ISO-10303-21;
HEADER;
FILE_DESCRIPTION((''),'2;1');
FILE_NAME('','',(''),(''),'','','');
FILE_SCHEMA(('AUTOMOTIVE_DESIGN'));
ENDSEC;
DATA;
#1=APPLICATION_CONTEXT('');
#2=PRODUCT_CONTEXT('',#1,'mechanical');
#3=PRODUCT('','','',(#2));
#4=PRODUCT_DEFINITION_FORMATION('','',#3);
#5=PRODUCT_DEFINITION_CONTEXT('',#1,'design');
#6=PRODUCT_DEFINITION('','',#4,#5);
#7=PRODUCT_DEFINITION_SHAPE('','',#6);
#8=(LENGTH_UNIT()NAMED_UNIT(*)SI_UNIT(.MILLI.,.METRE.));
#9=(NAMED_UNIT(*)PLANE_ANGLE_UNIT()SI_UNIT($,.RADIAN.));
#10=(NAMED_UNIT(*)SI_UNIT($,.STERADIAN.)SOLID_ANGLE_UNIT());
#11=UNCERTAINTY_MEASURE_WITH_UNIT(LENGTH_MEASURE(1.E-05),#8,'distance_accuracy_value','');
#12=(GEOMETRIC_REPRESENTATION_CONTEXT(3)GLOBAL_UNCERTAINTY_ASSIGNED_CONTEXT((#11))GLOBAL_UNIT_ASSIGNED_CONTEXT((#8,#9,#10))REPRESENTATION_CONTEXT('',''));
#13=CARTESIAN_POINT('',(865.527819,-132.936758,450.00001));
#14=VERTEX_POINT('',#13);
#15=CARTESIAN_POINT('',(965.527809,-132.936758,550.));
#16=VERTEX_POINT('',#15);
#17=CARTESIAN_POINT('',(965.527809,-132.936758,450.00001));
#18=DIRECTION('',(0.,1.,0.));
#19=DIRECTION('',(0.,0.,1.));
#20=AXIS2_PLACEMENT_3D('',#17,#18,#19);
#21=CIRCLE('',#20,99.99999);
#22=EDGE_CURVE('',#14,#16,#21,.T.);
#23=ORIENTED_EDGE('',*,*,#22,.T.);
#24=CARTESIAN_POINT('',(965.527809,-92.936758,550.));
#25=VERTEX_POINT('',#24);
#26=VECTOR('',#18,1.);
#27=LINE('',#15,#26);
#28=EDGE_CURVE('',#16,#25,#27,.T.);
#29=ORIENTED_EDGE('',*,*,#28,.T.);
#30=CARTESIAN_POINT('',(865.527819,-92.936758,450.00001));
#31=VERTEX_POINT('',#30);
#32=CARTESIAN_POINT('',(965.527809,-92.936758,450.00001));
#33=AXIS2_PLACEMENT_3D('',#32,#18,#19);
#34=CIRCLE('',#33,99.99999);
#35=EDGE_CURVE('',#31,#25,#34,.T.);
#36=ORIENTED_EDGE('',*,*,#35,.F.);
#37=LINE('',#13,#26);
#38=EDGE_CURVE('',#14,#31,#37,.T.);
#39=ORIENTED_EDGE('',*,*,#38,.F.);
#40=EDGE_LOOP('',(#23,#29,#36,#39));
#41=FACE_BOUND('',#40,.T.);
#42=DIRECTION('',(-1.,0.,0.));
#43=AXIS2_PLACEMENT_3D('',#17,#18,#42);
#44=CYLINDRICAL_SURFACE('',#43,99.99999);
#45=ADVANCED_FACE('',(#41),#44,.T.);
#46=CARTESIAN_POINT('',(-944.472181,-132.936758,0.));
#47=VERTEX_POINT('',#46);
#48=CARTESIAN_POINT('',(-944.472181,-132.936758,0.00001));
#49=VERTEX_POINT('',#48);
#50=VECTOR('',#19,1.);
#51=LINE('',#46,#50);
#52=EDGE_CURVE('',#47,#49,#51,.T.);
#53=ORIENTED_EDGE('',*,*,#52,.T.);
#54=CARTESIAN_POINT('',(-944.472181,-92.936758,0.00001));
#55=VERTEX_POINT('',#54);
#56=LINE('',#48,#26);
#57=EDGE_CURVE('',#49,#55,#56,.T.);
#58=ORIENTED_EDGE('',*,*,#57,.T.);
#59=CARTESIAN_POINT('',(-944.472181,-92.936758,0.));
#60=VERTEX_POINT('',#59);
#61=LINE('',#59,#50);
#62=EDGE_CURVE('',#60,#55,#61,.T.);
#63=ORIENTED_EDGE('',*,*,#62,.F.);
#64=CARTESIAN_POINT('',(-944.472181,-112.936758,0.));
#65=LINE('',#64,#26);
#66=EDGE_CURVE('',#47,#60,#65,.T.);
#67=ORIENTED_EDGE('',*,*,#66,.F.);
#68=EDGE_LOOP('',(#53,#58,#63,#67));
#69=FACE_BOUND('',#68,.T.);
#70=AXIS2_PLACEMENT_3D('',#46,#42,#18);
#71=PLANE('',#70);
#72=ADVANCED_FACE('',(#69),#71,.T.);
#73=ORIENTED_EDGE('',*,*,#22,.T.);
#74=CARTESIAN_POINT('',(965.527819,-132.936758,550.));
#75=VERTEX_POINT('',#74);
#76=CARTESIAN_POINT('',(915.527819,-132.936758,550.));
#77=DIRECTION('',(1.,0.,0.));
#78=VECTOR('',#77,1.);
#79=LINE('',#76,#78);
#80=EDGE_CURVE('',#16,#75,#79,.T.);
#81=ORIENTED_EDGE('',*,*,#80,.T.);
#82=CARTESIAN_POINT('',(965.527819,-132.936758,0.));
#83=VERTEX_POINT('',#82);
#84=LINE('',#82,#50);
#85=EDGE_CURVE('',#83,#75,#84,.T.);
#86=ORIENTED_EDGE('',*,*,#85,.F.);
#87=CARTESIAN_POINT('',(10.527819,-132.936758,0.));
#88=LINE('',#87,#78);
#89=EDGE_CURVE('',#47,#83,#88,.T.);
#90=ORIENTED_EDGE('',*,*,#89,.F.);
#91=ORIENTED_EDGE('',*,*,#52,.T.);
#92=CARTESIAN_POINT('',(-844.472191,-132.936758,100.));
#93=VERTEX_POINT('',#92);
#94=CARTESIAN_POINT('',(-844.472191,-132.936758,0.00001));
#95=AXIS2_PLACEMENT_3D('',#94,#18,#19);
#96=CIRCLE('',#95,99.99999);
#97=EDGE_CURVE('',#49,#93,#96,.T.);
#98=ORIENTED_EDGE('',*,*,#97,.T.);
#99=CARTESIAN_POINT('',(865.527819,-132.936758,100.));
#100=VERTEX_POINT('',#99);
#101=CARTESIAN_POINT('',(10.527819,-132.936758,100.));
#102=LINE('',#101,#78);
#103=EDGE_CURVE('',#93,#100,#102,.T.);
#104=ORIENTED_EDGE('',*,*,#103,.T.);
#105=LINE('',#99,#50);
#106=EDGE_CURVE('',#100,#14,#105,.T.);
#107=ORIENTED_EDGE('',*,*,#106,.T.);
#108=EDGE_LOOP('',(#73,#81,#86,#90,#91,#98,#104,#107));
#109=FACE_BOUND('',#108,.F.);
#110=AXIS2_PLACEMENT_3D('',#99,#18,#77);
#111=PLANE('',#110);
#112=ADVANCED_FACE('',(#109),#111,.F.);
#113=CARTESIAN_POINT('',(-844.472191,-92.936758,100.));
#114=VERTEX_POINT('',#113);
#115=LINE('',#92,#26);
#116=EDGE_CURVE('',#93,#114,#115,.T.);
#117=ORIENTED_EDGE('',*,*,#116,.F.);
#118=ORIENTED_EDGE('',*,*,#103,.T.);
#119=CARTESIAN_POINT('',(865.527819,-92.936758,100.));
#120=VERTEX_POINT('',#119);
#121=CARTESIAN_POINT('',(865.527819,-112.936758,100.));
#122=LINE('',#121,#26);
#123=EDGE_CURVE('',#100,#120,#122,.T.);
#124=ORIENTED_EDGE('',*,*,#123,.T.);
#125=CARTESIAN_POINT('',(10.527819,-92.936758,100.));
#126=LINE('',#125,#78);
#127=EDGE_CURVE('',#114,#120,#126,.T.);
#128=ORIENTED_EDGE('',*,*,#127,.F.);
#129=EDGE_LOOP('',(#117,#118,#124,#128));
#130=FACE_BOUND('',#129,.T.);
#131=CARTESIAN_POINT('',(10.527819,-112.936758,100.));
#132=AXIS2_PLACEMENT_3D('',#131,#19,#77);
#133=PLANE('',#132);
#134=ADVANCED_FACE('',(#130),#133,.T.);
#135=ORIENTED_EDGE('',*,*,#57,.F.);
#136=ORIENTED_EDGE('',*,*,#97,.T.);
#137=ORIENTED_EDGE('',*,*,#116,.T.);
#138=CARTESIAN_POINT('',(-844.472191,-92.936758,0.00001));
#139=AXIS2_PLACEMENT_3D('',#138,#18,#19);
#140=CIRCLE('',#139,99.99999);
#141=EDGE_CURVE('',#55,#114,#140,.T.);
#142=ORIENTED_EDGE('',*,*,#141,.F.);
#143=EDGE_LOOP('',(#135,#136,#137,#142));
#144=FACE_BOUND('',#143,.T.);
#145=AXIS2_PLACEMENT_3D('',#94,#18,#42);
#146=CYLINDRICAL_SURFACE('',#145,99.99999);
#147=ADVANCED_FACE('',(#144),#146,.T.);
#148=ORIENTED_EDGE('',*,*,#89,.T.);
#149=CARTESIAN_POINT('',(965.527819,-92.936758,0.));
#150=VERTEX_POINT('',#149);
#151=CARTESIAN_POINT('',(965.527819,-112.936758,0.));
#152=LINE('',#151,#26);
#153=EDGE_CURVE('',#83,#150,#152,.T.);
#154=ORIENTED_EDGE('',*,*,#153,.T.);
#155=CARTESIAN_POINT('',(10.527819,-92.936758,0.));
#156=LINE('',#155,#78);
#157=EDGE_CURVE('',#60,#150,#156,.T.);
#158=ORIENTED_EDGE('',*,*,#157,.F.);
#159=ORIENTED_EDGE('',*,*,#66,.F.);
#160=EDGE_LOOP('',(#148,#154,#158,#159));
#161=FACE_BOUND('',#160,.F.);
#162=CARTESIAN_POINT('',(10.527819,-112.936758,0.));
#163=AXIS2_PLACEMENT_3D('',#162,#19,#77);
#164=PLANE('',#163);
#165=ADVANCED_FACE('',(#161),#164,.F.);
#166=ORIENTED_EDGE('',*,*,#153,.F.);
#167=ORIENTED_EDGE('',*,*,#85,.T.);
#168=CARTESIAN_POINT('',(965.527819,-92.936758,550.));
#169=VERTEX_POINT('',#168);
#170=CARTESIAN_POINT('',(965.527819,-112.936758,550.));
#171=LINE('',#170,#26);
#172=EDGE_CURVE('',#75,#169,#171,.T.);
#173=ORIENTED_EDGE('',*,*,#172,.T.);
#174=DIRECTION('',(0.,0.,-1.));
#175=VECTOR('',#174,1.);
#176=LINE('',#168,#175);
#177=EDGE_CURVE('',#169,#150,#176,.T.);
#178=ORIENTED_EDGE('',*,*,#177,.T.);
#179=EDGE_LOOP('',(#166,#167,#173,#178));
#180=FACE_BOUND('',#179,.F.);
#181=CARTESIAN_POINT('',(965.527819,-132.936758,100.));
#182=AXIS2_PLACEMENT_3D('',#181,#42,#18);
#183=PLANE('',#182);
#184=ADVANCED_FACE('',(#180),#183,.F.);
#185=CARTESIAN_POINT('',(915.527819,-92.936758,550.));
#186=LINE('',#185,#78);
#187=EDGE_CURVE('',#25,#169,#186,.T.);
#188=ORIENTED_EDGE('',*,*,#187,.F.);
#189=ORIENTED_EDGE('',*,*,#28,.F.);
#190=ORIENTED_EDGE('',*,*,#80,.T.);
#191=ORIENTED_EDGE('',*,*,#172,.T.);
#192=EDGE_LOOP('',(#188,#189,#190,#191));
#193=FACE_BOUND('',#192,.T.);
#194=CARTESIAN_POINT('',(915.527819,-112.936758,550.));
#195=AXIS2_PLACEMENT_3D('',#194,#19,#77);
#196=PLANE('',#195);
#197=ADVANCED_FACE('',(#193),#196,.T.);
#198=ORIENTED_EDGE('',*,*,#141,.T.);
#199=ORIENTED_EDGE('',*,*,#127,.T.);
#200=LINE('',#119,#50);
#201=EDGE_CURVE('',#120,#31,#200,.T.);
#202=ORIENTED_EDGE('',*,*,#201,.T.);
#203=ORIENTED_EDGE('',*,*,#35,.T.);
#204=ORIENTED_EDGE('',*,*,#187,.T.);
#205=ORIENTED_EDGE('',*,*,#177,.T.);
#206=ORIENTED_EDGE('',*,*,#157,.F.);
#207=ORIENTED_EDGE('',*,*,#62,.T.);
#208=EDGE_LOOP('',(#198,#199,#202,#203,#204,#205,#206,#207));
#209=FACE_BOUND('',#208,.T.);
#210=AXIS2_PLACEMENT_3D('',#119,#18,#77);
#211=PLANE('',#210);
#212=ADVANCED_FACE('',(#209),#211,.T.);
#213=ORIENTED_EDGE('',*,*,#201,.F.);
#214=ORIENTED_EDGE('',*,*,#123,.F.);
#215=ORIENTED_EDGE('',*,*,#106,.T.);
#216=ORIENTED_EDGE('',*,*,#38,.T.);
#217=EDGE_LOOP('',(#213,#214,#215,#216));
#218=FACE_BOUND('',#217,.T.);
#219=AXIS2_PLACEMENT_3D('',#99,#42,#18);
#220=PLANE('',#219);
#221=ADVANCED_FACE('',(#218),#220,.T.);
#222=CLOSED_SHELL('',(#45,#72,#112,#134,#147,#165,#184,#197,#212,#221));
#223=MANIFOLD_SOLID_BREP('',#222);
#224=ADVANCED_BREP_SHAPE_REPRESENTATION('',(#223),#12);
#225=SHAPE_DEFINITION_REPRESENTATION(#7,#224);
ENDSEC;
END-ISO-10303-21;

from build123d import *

# Parameters (mm, degrees)
F0_W     = 1910
F0_H     = 40
F1_DEPTH = 100
F2_W     = 100
F2_H     = 40
F3_DEPTH = 450
F4_R     = 99.99999


# Not quite as in the source:
# - a fillet or chamfer is up to 0.001 mm smaller than in the source, because OpenCascade refuses the exact size


with BuildPart() as f1:
    # F0 (on Top) → F1 (new body)
    with BuildSketch(Plane.XY):
        with Locations((10.5278193951, -112.9367578724)):
            Rectangle(F0_W, F0_H)
    extrude(amount=F1_DEPTH)

    # F2 (on face) → F3 (join)
    with BuildSketch(Plane.XY.offset(100)):
        with Locations((915.5278193951, -112.9367578724)):
            Rectangle(F2_W, F2_H)
    extrude(amount=F3_DEPTH)

    # F4 (radius 100 in the source; OpenCascade refuses exactly that, so slightly less here)
    f4_edges = [f1.edges().sort_by_distance(p)[0] for p in [
        (-944.472181, -112.936758, 100),
        (865.527819, -112.936758, 550),
    ]]
    fillet(f4_edges, radius=F4_R)


solid = f1.part
